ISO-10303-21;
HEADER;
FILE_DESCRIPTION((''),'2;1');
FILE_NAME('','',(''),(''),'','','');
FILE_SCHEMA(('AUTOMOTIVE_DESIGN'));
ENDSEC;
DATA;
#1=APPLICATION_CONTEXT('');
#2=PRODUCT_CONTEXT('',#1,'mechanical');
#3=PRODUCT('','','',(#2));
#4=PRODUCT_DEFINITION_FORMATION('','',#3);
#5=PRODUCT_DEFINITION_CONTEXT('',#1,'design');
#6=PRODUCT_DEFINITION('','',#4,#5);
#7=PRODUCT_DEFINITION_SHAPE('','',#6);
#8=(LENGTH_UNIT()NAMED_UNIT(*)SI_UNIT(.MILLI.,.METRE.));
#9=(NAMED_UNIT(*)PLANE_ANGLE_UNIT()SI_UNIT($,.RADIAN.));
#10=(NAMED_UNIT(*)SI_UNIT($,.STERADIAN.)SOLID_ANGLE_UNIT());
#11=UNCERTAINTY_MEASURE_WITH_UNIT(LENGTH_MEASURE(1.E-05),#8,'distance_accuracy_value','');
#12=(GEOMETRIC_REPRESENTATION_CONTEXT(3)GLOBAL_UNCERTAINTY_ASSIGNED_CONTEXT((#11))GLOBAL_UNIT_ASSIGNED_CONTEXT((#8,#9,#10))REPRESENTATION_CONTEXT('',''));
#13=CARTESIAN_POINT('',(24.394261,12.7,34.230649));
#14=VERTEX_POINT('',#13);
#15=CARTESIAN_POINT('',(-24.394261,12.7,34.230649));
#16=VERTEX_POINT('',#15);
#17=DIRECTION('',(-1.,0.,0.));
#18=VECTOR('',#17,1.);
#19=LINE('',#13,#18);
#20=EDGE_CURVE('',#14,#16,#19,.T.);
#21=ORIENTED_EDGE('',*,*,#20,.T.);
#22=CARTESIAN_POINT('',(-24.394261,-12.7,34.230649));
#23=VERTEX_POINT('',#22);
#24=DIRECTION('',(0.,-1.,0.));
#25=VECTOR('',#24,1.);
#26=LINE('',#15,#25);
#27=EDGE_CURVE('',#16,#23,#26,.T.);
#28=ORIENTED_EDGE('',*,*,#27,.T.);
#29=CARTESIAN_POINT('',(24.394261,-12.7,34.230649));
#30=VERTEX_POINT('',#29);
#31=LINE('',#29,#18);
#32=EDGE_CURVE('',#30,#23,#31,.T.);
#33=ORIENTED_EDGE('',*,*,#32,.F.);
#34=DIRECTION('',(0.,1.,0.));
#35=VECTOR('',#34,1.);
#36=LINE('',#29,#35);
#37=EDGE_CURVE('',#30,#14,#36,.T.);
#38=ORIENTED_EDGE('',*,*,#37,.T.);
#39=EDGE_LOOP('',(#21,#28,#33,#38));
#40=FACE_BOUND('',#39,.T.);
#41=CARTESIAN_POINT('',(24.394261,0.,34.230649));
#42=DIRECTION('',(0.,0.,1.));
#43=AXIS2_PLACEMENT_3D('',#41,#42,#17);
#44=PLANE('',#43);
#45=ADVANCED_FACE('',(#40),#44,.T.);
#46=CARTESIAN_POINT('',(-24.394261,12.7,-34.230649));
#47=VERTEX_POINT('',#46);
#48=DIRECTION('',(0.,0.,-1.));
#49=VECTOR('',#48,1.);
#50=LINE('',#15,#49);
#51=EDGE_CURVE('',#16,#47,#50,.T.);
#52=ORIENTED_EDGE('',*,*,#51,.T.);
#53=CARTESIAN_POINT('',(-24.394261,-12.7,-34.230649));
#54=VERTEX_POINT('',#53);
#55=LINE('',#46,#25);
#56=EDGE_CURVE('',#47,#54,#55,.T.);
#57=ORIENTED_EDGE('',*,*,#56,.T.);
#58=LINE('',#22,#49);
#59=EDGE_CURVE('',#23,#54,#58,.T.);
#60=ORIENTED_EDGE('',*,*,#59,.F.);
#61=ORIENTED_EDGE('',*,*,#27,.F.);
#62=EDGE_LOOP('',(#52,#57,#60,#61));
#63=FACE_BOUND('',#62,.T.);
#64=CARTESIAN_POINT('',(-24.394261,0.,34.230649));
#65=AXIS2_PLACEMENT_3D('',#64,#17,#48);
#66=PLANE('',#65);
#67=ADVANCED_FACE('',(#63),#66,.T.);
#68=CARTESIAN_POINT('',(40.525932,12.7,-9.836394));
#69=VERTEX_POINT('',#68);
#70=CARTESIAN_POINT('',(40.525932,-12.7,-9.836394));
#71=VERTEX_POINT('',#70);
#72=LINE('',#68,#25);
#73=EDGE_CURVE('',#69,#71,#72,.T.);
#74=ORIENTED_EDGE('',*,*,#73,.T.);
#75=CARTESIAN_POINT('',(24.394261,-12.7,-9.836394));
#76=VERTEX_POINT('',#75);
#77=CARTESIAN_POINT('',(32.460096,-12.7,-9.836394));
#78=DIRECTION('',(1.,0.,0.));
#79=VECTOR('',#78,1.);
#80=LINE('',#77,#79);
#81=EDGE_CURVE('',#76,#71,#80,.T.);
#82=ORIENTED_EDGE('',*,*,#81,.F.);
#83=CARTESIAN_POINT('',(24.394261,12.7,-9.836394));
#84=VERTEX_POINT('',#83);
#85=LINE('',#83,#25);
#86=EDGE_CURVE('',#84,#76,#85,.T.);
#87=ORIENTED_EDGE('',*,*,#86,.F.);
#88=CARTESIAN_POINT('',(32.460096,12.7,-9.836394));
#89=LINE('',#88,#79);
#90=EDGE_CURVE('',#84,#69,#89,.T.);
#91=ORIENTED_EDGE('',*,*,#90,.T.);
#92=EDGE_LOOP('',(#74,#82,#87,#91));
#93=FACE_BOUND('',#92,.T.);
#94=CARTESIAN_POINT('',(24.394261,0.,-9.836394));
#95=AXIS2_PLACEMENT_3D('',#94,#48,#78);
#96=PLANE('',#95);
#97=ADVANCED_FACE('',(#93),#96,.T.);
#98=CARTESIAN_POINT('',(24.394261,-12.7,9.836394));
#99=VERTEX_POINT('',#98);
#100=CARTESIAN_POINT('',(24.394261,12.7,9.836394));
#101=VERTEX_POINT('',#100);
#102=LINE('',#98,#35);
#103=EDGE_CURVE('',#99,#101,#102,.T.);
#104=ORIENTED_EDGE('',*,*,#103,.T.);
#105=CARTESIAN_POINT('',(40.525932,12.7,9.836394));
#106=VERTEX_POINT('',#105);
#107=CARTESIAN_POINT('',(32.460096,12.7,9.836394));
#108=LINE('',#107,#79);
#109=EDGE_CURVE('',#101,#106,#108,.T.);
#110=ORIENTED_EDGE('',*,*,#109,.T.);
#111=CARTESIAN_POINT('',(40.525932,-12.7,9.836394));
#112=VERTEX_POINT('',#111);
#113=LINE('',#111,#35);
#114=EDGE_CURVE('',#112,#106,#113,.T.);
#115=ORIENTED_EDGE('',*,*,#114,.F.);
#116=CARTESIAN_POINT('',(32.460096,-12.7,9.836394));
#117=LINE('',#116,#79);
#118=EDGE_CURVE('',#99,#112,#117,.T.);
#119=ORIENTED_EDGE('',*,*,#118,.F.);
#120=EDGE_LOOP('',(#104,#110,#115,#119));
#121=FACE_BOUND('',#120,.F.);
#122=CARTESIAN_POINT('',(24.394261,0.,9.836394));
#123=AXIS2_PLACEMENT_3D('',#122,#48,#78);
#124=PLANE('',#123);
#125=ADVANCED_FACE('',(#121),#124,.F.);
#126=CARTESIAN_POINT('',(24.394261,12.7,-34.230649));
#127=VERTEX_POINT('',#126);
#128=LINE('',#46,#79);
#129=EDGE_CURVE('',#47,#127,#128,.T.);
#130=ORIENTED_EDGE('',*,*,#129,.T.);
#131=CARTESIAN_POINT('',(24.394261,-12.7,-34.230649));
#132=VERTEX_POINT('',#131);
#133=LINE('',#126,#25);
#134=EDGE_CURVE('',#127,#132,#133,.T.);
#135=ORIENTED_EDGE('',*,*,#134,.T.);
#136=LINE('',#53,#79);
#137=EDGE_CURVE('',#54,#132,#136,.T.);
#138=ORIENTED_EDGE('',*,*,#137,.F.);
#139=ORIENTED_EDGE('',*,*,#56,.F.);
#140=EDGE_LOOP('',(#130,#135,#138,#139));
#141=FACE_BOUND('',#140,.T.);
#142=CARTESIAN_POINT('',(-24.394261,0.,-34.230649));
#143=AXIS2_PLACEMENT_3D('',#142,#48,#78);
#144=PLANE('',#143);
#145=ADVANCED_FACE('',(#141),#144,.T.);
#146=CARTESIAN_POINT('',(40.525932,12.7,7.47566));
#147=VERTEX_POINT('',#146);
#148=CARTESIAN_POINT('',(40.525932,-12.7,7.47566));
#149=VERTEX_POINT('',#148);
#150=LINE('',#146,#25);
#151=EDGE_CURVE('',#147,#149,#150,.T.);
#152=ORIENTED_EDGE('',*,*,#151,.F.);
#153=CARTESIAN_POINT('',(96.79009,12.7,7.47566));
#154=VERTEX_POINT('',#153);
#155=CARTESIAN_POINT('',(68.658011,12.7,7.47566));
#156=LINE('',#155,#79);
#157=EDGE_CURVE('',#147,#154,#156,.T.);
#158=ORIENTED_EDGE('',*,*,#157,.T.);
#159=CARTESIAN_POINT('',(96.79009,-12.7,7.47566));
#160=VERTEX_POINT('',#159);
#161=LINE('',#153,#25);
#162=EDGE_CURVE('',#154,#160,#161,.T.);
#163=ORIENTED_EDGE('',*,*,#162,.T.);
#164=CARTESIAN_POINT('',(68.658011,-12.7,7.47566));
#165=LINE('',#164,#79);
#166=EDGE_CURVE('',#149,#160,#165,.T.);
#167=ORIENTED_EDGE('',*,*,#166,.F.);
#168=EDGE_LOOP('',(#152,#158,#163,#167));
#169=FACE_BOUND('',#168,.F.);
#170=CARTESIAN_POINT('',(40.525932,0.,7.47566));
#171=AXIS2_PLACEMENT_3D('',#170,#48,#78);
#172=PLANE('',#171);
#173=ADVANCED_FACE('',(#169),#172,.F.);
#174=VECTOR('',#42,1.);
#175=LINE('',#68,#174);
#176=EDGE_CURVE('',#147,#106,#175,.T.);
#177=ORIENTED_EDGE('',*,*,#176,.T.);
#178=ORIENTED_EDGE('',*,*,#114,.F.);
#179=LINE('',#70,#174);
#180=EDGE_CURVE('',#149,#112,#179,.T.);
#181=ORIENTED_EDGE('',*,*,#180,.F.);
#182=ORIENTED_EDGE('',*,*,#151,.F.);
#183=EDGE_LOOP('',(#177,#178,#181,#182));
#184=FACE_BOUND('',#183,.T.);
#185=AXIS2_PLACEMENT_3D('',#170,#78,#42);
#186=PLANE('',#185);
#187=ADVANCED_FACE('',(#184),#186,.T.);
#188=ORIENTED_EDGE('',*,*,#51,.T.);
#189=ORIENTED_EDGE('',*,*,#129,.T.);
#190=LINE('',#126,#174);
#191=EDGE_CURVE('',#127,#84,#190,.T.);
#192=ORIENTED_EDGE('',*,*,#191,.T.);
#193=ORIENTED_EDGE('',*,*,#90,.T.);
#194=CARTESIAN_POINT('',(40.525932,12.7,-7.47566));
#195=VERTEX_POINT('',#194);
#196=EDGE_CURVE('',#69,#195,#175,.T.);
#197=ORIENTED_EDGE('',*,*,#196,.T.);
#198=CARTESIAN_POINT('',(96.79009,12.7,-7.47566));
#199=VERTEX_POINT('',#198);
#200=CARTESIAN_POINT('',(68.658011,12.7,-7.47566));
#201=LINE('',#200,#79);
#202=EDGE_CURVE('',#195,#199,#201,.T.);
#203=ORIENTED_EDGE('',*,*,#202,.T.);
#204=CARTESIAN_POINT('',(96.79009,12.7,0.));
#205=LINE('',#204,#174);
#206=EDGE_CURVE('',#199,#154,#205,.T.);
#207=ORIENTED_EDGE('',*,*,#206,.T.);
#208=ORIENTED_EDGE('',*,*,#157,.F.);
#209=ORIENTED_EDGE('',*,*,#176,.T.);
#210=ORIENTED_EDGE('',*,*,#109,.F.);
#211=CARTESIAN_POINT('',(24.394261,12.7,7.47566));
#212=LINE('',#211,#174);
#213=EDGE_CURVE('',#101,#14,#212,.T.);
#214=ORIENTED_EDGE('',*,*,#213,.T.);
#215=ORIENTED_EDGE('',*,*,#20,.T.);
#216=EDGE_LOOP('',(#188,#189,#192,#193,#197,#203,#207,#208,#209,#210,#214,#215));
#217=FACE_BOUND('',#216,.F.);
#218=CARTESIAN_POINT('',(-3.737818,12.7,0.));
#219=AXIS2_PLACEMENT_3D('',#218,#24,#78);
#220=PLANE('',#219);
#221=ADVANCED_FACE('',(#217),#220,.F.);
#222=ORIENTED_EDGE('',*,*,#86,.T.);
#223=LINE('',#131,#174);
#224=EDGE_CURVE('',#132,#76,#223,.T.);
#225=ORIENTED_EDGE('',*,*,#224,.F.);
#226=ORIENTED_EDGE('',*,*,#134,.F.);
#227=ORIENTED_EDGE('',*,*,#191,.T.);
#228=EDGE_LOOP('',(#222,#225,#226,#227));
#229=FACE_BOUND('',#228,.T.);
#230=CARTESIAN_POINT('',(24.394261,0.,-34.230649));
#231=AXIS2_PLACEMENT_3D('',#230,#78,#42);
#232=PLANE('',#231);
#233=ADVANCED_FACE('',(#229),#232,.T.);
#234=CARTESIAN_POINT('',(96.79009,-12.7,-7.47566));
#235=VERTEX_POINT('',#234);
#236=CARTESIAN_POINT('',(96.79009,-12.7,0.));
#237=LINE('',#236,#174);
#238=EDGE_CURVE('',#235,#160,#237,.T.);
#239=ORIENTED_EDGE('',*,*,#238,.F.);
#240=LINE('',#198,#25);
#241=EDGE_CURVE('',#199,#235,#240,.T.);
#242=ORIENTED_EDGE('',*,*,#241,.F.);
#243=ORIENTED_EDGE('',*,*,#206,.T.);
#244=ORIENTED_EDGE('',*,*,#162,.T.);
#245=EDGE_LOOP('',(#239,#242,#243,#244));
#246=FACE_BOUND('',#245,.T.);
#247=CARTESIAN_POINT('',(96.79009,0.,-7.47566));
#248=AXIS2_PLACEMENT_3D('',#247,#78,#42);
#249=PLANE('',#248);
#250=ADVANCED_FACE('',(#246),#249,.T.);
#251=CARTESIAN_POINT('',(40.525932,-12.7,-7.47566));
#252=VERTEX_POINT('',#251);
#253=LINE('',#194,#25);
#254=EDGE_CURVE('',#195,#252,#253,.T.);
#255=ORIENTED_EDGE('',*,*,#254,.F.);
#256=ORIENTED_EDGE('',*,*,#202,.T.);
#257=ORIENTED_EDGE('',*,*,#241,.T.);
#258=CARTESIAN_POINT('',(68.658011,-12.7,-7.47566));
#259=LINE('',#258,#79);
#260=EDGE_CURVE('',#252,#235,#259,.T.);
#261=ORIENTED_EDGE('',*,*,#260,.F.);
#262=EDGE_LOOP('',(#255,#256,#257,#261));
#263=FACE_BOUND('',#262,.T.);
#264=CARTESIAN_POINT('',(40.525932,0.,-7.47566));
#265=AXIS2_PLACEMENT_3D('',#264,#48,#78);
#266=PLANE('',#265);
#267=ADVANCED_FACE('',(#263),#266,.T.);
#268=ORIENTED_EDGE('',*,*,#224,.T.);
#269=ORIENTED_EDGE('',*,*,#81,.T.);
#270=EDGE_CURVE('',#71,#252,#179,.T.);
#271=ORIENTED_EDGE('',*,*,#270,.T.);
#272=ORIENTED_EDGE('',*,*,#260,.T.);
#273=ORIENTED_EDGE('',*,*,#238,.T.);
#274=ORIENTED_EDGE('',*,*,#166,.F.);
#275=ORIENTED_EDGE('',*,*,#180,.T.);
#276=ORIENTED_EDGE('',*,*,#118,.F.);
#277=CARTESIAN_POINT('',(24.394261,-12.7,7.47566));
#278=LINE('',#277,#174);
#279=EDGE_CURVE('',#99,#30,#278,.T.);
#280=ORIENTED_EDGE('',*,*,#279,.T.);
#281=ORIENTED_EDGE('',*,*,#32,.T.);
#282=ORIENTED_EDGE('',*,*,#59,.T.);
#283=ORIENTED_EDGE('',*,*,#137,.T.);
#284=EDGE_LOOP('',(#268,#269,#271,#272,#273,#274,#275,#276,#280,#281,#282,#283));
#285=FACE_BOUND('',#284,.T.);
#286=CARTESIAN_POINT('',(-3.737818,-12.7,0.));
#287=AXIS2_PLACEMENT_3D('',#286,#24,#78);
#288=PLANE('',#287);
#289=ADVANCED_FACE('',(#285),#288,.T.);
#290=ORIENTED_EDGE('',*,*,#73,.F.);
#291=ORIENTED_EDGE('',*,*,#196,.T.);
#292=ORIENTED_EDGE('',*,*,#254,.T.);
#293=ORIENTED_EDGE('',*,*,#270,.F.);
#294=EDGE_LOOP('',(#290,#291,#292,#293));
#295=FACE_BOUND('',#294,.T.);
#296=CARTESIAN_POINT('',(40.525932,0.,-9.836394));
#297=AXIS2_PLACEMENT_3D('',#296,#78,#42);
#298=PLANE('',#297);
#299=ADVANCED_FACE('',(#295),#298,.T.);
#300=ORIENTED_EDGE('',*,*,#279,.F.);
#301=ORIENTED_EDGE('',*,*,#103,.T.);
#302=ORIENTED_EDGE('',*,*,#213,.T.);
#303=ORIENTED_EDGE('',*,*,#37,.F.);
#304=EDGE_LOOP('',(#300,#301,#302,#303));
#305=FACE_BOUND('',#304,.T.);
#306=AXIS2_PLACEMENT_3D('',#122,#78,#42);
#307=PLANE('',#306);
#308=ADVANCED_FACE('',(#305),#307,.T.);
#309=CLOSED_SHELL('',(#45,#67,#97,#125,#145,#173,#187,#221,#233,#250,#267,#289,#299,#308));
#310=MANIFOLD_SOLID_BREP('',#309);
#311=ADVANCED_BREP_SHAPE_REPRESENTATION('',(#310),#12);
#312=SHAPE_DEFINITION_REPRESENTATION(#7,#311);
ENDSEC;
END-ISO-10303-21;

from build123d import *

# Parameters (mm, degrees)
F0_W     = 24.0008160472
F0_H     = 14.9513203651
F0_W_2   = 16.1316711456
F0_H_2   = 2.3607341573
F0_W_3   = 56.2641583383
F2_DEPTH = 12.7
F4_DEPTH = 25.4


# Not quite as in the source:
# - the program builds the solid bodies; features that only make, move or delete a surface that nothing else refers to are left out


with BuildPart() as f2:
    # F0 (on Front) → F2 (new body, symmetric)
    with BuildSketch(Plane.XZ):
        with Locations((-3.7378184497, 0)):
            Rectangle(F0_W, F0_H)
        Polygon((24.3942607194, 34.2306494713), (-24.3942607194, 34.2306494713), (-24.3942607194, -34.2306494713), (24.3942607194, -34.2306494713), (24.3942607194, -9.8363943398), (8.2625895739, -9.8363943398), (8.2625895739, -7.4756601825), (-15.7382264733, -7.4756601825), (-15.7382264733, 7.4756601825), (8.2625895739, 7.4756601825), (8.2625895739, 9.8363943398), (24.3942607194, 9.8363943398), align=None)
        with Locations((32.4600962922, 0)):
            Rectangle(F0_W_2, F0_H)
        with Locations((16.3284251466, 0)):
            Rectangle(F0_W_2, F0_H)
        with Locations((16.3284251466, 8.6560272612)):
            Rectangle(F0_W_2, F0_H_2)
        with Locations((32.4600962922, 8.6560272612)):
            Rectangle(F0_W_2, F0_H_2)
        with Locations((16.3284251466, -8.6560272612)):
            Rectangle(F0_W_2, F0_H_2)
        with Locations((32.4600962922, -8.6560272612)):
            Rectangle(F0_W_2, F0_H_2)
        with Locations((68.6580110341, 0)):
            Rectangle(F0_W_3, F0_H)
    extrude(amount=F2_DEPTH, both=True)

    # F4 (add): a face of the model
    f4_faces = [f2.faces().sort_by_distance(p)[0] for p in [
        (15.1283797196, 12.7, 0),
    ]]
    extrude(f4_faces, amount=-F4_DEPTH)


solid = f2.part
